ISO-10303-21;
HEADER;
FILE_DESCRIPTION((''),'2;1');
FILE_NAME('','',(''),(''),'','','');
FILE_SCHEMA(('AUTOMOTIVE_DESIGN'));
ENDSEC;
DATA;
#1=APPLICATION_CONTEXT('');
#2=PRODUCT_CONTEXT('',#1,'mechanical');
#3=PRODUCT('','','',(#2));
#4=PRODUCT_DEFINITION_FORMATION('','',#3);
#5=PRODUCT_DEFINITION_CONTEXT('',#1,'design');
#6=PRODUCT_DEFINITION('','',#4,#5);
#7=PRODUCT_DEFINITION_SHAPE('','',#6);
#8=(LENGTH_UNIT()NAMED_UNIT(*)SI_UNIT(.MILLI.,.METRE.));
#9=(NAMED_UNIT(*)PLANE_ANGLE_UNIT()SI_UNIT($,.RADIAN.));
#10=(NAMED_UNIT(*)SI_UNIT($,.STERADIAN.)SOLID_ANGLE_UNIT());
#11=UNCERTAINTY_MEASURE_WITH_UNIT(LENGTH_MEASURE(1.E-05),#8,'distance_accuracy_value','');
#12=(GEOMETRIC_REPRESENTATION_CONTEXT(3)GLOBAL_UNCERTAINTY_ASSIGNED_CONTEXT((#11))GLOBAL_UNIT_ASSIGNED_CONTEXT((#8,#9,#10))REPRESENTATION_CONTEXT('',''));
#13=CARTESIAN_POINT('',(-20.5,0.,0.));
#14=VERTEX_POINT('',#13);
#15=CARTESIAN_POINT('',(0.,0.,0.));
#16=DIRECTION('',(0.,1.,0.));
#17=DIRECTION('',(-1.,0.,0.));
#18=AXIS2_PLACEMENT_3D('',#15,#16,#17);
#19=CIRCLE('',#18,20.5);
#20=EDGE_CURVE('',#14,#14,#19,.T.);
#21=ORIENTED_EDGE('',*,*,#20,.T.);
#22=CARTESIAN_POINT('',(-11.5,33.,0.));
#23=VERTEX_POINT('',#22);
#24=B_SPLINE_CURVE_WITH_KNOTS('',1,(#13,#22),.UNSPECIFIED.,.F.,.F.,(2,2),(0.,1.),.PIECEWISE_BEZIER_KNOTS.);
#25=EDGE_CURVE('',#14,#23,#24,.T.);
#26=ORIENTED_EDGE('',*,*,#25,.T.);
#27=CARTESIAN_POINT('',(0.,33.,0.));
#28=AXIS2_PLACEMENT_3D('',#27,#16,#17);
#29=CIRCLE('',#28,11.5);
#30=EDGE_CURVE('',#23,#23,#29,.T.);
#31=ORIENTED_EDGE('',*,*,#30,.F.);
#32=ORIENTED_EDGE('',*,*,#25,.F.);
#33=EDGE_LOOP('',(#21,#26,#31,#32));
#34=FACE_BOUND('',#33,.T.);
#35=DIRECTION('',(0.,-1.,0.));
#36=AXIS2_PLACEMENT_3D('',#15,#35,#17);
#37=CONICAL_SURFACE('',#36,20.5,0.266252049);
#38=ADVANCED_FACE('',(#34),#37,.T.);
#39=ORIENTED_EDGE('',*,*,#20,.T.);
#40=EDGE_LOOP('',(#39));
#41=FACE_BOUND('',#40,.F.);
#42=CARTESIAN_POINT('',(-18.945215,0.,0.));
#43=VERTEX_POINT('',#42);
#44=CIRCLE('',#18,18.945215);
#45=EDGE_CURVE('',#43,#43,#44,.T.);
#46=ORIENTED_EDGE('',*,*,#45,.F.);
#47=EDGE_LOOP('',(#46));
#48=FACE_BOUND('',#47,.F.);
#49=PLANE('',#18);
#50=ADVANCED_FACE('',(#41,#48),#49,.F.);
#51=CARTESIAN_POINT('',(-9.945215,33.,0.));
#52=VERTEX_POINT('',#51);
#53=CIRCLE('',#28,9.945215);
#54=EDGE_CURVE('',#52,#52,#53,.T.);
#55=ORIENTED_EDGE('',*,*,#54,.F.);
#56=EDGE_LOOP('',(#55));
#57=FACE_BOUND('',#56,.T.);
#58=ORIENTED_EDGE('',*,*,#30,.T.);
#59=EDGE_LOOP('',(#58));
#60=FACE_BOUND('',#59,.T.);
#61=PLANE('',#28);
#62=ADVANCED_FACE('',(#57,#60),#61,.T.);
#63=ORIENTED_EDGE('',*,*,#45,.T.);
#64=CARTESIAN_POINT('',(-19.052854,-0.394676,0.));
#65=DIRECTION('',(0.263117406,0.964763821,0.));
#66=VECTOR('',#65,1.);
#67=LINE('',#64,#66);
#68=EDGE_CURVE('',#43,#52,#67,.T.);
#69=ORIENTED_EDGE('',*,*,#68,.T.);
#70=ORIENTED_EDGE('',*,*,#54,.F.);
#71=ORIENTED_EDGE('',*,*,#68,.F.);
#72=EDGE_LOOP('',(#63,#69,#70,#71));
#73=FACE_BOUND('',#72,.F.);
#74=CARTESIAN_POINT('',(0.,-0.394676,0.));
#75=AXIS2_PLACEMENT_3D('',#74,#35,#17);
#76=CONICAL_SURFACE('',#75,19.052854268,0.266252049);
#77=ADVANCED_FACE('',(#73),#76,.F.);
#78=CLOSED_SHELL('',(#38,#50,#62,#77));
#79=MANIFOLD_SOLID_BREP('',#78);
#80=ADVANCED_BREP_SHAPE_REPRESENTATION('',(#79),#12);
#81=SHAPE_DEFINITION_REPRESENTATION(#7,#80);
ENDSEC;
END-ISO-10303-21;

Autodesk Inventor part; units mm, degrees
ref_plane "YZ Plane" through (0, 0, 0) normal (1, 0, 0) x (0, 1, 0)
ref_plane "XY Plane" through (0, 0, 0) normal (0, 0, 1) x (1, 0, 0)
sketch "Szkic6" plane through (0, 0, 0) normal (0, 1, 0) x (-1, 0, 0)
  circle A0 centre (0, 0) radius 20.5
  dimension "d33" = 41
ref_plane "Płaszczyzna konstrukcyjna1" through (0, 33, 0) normal (0, 1, 0) x (-1, 0, 0)
sketch "Szkic7" plane through (0, 33, 0) normal (0, 1, 0) x (-1, 0, 0)
  circle A0 centre (0, 0) radius 11.5
  dimension "d35" = 23
loft "Wyciągnięcie złożone1" add profiles "Szkic6", "Szkic7"
shell "Skorupa1" thickness 1.5 removed faces 2 at (-0.1507, 33, 2.542) at (-3.5154, 0, 4.1371)
equation "\"d33\" = OD1"
equation "\"d35\" = OD2"
equation "\"d52\" = THK"
equation "\"SzerokośćGięciaPodcięcia\" = Grubość"
equation "\"RozmiarPodcięciaNarożnika\" = 4 * Grubość"
equation "\"PromieńPrzejścia\" = PromieńGięcia"
equation "\"Rozmiar_promienia_Jacobiego\" = PromieńGięcia"
equation "\"Wielk_odstępu\" = Grubość"
equation "\"d2\" = PromieńGięcia"
equation "\"d23\" = PromieńGięcia"
equation "\"OD1\" = 41"
equation "\"OD2\" = 23"
equation "\"L\" = 33"
equation "\"THK\" = 1.5"
equation "\"d34\" = L"
equation "\"Grubość\" = 1.5"
equation "\"PromieńGięcia\" = 3"
properties part number "Redukcja symetryczna Ø41x23x1,5 L=33" material "304"
